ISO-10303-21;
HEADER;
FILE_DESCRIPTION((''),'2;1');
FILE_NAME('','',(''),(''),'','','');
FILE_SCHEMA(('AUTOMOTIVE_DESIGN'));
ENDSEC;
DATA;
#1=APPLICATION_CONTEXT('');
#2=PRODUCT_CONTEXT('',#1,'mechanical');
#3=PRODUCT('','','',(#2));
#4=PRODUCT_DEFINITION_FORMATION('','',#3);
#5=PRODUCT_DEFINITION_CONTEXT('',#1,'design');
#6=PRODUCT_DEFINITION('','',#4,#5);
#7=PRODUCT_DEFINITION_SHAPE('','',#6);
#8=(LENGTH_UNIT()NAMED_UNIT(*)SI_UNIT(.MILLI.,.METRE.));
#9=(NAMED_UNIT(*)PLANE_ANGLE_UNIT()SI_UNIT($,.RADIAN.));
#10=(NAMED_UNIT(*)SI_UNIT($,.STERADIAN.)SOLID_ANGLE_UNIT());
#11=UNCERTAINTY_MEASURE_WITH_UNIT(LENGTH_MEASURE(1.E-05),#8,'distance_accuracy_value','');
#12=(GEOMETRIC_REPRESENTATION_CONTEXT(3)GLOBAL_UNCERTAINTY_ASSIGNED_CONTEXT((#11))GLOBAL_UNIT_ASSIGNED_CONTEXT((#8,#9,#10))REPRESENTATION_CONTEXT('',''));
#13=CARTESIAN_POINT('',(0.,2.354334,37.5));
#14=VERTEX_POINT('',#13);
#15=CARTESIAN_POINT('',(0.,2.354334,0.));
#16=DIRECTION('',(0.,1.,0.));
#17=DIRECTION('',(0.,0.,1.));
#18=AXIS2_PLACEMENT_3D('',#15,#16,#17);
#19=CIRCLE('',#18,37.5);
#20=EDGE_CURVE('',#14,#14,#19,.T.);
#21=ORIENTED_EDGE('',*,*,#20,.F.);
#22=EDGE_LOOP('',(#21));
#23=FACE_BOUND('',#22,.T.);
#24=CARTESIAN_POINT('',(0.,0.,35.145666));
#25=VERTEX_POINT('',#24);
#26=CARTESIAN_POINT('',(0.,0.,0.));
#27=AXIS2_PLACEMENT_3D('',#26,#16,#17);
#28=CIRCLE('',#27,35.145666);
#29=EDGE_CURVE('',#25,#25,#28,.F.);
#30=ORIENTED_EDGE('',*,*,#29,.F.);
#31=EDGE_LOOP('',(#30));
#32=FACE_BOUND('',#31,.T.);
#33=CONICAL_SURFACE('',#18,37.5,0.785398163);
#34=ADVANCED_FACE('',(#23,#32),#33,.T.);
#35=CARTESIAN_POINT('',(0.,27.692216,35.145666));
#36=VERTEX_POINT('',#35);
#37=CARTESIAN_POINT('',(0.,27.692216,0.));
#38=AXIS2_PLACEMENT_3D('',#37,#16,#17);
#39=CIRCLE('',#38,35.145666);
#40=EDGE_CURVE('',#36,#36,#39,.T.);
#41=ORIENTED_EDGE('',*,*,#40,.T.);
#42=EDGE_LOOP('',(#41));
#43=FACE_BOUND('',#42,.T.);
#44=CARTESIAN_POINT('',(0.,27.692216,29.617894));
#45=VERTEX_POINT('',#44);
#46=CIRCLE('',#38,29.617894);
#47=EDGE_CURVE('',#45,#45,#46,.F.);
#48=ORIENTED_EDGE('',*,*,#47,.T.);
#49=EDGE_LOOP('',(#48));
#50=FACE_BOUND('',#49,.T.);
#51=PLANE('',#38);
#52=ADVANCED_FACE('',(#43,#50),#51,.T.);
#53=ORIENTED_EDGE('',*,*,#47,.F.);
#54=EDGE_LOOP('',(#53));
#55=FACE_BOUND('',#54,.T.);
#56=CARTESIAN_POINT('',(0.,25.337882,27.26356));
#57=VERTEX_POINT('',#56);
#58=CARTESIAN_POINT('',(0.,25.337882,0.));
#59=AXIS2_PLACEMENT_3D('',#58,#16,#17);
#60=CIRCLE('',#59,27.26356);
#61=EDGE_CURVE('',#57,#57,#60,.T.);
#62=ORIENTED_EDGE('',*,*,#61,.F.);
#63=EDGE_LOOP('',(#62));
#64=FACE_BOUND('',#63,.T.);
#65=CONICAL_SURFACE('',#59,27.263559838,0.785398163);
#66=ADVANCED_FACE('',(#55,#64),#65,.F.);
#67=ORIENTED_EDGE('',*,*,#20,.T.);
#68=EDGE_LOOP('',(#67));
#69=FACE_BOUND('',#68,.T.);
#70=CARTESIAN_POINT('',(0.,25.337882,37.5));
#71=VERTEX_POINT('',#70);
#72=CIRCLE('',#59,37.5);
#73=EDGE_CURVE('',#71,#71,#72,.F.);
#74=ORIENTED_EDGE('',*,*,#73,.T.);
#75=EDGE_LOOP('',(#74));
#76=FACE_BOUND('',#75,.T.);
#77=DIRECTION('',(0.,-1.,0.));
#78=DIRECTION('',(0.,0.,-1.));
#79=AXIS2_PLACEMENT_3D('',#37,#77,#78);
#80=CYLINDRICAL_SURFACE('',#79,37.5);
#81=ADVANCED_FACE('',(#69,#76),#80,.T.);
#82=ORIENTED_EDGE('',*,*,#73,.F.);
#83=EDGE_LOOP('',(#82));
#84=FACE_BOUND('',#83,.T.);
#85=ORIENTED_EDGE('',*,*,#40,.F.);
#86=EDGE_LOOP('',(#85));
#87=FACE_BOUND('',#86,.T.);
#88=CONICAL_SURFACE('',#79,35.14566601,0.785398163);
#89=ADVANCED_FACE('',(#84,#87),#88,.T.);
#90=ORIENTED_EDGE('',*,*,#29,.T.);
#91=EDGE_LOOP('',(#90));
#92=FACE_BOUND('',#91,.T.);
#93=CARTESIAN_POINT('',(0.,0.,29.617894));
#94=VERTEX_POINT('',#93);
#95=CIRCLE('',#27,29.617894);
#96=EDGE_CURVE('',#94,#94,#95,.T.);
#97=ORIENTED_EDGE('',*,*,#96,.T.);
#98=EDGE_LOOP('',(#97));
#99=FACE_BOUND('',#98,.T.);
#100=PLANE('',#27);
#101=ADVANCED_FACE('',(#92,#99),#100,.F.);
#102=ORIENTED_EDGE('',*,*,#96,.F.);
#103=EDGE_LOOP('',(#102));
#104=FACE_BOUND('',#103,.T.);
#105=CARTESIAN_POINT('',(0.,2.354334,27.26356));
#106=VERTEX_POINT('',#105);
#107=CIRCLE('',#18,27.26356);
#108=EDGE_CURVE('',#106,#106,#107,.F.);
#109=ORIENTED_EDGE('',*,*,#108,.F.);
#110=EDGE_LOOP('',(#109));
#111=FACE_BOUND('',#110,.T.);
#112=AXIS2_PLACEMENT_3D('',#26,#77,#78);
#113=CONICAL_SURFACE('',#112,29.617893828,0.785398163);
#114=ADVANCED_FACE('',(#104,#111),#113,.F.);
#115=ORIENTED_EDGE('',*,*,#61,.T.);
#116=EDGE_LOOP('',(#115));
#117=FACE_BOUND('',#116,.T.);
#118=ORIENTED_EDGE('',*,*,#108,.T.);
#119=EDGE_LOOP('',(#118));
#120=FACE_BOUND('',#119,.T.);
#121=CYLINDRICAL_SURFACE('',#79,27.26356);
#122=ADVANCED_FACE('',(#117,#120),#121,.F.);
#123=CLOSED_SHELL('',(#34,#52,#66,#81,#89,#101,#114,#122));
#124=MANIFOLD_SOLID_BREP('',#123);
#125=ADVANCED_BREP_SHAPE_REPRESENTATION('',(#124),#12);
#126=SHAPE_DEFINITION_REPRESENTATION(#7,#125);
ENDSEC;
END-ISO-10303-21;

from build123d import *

# Parameters (mm, degrees)
SKETCH1_R           = 37.5
BOSS_EXTRUDE1_DEPTH = 27.692215675
SKETCH2_R           = 27.263559838
CUT_EXTRUDE1_DEPTH  = 60.827742804
CHAMFER1_SIZE       = 2.35433399


with BuildPart() as part:
    # Sketch1 → Boss-Extrude1 (new body)
    with BuildSketch(Plane(origin=(0, 0, 0), x_dir=(1, 0, 0), z_dir=(0, 1, 0))):
        Circle(SKETCH1_R)
    extrude(amount=BOSS_EXTRUDE1_DEPTH)

    # Sketch2 → Cut-Extrude1 (cut, through all)
    with BuildSketch(Plane(origin=(0, 0, 0), x_dir=(1, 0, 0), z_dir=(0, 1, 0))):
        Circle(SKETCH2_R)
    extrude(amount=CUT_EXTRUDE1_DEPTH, mode=Mode.SUBTRACT)

    # Chamfer1
    chamfer1_edges = [part.edges().sort_by_distance(p)[0] for p in [
        (-27.263559838, 27.692215675, 0),
        (-27.263559838, 0, 0),
        (-37.5, 0, 0),
        (-37.5, 27.692215675, 0),
    ]]
    chamfer(chamfer1_edges, length=CHAMFER1_SIZE)


solid = part.part
